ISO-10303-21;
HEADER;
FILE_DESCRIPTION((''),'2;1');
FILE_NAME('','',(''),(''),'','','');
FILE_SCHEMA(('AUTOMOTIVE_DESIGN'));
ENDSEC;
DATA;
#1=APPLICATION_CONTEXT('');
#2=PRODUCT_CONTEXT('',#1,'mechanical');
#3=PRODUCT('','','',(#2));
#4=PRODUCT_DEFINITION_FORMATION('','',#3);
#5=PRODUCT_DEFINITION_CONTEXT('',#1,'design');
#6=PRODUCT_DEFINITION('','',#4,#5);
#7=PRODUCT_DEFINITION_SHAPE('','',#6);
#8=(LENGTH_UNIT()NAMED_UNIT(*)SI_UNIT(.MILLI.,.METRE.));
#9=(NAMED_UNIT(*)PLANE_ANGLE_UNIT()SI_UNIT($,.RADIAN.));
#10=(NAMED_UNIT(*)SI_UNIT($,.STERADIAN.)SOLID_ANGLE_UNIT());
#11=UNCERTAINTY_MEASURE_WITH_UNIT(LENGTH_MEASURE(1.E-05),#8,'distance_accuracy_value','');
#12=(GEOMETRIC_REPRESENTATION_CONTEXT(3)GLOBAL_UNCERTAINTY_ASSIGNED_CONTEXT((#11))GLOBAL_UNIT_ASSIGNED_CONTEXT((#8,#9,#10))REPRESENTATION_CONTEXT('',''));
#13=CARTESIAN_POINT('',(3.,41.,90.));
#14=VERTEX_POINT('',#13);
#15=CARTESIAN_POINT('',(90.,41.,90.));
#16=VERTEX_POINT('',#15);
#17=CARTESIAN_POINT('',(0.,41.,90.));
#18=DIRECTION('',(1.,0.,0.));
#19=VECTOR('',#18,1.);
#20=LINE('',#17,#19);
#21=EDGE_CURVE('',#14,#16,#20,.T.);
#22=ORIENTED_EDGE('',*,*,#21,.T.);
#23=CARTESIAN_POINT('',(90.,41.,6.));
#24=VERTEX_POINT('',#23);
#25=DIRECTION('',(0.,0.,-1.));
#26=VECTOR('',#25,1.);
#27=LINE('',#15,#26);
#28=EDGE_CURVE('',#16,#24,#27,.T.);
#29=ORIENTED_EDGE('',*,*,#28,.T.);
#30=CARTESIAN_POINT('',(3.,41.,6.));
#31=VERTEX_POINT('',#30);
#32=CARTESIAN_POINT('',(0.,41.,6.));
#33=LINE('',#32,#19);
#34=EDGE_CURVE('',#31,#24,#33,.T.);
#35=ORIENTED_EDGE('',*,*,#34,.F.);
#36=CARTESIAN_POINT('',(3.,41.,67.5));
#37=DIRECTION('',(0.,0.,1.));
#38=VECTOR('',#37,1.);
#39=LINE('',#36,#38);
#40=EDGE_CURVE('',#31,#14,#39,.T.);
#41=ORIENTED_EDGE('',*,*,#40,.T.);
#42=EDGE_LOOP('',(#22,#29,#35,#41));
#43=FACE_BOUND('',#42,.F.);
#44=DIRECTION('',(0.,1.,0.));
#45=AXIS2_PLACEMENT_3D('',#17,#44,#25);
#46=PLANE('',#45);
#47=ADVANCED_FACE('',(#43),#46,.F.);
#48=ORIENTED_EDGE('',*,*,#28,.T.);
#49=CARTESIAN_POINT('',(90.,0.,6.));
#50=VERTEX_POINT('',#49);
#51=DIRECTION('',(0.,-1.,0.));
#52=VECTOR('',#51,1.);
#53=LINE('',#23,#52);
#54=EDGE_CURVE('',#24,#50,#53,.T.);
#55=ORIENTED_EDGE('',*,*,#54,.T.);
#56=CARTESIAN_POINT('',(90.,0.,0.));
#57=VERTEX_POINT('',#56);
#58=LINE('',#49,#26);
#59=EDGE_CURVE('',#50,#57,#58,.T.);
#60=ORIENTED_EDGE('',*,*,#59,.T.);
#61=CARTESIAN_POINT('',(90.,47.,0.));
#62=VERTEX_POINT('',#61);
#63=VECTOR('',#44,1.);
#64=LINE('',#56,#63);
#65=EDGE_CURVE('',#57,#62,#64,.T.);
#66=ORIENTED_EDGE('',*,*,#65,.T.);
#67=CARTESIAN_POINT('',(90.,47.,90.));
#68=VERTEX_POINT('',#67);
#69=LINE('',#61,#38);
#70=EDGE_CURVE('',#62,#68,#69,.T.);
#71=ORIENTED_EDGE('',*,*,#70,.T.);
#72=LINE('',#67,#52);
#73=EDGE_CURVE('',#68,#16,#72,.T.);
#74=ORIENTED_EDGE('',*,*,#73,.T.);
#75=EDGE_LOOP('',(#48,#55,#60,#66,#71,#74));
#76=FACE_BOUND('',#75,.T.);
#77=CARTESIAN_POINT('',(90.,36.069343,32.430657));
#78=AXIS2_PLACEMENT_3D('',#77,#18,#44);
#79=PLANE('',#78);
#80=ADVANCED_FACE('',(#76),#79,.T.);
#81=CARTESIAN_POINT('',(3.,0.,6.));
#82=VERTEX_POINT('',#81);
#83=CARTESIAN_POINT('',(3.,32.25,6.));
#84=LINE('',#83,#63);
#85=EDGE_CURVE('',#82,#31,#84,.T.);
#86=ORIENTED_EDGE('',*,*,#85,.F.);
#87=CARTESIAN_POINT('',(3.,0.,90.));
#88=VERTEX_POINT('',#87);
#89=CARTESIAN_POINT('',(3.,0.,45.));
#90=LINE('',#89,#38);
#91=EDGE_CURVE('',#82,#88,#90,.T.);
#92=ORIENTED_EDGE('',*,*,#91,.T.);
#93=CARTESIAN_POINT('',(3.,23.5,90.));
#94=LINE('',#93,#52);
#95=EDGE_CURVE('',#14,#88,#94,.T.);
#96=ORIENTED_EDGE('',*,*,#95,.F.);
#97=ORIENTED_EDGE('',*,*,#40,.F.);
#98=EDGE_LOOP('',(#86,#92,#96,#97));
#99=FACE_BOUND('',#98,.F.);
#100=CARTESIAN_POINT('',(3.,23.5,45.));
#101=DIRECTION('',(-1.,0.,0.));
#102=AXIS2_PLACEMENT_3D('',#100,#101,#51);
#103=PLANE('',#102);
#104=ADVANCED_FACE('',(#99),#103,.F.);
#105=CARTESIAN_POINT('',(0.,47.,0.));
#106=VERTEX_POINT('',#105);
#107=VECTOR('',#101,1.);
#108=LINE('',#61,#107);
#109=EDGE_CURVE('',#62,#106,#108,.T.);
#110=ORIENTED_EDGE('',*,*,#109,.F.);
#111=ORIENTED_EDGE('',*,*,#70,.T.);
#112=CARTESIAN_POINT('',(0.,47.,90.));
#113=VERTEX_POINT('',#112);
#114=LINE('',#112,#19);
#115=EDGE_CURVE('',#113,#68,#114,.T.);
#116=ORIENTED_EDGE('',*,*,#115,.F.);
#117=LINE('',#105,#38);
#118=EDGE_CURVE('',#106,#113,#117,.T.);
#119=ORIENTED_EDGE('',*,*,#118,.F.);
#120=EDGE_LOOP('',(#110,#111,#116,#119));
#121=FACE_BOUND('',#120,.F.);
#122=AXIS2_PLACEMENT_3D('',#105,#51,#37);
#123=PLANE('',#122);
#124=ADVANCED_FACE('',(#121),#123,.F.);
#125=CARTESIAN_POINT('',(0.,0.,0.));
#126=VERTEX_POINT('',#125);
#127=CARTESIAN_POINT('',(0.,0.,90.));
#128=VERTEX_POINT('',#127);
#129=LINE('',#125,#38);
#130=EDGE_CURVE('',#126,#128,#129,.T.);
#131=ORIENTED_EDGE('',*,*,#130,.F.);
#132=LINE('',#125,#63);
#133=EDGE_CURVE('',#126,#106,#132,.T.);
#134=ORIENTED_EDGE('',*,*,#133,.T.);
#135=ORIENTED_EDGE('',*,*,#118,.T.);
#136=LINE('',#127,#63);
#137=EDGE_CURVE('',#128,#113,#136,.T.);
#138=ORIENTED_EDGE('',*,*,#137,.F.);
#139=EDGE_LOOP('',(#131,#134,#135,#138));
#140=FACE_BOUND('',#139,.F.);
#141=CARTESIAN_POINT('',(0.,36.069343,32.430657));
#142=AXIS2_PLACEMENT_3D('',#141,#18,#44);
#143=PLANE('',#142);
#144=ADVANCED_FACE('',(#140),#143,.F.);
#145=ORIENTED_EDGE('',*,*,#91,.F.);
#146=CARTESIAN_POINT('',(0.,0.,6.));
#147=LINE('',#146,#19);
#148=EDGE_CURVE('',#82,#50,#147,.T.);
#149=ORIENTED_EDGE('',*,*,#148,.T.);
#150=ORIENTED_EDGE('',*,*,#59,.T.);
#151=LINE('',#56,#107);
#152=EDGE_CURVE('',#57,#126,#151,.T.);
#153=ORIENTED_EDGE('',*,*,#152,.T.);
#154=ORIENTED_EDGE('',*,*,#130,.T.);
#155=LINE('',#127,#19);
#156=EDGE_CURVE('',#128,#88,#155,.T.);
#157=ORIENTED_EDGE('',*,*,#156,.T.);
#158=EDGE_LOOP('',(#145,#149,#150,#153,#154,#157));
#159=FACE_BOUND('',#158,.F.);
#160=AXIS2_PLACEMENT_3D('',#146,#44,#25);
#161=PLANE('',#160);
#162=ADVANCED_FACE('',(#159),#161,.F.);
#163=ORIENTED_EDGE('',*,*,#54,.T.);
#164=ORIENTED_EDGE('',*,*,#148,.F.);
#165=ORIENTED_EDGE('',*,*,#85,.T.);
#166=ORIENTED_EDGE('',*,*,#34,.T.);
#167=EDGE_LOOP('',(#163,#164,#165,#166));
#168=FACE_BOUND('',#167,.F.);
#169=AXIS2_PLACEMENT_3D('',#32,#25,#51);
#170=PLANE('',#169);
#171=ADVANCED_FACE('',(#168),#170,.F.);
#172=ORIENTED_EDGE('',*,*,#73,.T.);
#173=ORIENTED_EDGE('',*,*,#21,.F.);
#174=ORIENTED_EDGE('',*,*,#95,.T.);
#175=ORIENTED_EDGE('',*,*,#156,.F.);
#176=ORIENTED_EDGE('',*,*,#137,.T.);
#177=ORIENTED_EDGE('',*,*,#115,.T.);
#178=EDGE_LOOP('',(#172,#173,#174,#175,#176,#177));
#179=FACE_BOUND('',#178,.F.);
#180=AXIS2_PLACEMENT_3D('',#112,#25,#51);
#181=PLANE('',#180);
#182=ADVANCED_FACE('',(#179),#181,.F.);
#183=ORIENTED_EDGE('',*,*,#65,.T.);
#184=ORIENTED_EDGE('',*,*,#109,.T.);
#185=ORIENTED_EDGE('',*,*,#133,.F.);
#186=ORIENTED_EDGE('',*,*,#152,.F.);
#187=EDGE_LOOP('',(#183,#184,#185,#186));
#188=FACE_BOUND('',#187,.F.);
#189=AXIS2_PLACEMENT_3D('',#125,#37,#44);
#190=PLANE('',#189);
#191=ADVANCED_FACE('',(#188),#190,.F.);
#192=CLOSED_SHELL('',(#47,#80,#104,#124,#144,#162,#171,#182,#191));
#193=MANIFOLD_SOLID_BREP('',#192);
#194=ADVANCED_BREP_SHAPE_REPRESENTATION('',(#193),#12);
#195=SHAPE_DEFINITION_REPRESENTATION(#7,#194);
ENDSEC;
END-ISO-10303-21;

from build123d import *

# Parameters (mm, degrees)
F1_DEPTH = 90
F3_W     = 47
F3_H     = 90
F4_DEPTH = 3


# Not quite as in the source:
# - the program builds the solid bodies; features that only make, move or delete a surface that nothing else refers to are left out


with BuildPart() as f1:
    # F0 (on Right) → F1 (new body)
    with BuildSketch(Plane.YZ):
        Polygon((47, 0), (47, 90), (41, 90), (41, 6), (0, 6), (0, 0), align=None)
    extrude(amount=F1_DEPTH)

    # F3 (on face) → F4 (join)
    with BuildSketch(Plane(origin=(0, 0, 0), x_dir=(0, -1, 0), z_dir=(-1, 0, 0))):
        with Locations((-23.5, 45)):
            Rectangle(F3_W, F3_H)
    extrude(amount=-F4_DEPTH)


solid = f1.part
